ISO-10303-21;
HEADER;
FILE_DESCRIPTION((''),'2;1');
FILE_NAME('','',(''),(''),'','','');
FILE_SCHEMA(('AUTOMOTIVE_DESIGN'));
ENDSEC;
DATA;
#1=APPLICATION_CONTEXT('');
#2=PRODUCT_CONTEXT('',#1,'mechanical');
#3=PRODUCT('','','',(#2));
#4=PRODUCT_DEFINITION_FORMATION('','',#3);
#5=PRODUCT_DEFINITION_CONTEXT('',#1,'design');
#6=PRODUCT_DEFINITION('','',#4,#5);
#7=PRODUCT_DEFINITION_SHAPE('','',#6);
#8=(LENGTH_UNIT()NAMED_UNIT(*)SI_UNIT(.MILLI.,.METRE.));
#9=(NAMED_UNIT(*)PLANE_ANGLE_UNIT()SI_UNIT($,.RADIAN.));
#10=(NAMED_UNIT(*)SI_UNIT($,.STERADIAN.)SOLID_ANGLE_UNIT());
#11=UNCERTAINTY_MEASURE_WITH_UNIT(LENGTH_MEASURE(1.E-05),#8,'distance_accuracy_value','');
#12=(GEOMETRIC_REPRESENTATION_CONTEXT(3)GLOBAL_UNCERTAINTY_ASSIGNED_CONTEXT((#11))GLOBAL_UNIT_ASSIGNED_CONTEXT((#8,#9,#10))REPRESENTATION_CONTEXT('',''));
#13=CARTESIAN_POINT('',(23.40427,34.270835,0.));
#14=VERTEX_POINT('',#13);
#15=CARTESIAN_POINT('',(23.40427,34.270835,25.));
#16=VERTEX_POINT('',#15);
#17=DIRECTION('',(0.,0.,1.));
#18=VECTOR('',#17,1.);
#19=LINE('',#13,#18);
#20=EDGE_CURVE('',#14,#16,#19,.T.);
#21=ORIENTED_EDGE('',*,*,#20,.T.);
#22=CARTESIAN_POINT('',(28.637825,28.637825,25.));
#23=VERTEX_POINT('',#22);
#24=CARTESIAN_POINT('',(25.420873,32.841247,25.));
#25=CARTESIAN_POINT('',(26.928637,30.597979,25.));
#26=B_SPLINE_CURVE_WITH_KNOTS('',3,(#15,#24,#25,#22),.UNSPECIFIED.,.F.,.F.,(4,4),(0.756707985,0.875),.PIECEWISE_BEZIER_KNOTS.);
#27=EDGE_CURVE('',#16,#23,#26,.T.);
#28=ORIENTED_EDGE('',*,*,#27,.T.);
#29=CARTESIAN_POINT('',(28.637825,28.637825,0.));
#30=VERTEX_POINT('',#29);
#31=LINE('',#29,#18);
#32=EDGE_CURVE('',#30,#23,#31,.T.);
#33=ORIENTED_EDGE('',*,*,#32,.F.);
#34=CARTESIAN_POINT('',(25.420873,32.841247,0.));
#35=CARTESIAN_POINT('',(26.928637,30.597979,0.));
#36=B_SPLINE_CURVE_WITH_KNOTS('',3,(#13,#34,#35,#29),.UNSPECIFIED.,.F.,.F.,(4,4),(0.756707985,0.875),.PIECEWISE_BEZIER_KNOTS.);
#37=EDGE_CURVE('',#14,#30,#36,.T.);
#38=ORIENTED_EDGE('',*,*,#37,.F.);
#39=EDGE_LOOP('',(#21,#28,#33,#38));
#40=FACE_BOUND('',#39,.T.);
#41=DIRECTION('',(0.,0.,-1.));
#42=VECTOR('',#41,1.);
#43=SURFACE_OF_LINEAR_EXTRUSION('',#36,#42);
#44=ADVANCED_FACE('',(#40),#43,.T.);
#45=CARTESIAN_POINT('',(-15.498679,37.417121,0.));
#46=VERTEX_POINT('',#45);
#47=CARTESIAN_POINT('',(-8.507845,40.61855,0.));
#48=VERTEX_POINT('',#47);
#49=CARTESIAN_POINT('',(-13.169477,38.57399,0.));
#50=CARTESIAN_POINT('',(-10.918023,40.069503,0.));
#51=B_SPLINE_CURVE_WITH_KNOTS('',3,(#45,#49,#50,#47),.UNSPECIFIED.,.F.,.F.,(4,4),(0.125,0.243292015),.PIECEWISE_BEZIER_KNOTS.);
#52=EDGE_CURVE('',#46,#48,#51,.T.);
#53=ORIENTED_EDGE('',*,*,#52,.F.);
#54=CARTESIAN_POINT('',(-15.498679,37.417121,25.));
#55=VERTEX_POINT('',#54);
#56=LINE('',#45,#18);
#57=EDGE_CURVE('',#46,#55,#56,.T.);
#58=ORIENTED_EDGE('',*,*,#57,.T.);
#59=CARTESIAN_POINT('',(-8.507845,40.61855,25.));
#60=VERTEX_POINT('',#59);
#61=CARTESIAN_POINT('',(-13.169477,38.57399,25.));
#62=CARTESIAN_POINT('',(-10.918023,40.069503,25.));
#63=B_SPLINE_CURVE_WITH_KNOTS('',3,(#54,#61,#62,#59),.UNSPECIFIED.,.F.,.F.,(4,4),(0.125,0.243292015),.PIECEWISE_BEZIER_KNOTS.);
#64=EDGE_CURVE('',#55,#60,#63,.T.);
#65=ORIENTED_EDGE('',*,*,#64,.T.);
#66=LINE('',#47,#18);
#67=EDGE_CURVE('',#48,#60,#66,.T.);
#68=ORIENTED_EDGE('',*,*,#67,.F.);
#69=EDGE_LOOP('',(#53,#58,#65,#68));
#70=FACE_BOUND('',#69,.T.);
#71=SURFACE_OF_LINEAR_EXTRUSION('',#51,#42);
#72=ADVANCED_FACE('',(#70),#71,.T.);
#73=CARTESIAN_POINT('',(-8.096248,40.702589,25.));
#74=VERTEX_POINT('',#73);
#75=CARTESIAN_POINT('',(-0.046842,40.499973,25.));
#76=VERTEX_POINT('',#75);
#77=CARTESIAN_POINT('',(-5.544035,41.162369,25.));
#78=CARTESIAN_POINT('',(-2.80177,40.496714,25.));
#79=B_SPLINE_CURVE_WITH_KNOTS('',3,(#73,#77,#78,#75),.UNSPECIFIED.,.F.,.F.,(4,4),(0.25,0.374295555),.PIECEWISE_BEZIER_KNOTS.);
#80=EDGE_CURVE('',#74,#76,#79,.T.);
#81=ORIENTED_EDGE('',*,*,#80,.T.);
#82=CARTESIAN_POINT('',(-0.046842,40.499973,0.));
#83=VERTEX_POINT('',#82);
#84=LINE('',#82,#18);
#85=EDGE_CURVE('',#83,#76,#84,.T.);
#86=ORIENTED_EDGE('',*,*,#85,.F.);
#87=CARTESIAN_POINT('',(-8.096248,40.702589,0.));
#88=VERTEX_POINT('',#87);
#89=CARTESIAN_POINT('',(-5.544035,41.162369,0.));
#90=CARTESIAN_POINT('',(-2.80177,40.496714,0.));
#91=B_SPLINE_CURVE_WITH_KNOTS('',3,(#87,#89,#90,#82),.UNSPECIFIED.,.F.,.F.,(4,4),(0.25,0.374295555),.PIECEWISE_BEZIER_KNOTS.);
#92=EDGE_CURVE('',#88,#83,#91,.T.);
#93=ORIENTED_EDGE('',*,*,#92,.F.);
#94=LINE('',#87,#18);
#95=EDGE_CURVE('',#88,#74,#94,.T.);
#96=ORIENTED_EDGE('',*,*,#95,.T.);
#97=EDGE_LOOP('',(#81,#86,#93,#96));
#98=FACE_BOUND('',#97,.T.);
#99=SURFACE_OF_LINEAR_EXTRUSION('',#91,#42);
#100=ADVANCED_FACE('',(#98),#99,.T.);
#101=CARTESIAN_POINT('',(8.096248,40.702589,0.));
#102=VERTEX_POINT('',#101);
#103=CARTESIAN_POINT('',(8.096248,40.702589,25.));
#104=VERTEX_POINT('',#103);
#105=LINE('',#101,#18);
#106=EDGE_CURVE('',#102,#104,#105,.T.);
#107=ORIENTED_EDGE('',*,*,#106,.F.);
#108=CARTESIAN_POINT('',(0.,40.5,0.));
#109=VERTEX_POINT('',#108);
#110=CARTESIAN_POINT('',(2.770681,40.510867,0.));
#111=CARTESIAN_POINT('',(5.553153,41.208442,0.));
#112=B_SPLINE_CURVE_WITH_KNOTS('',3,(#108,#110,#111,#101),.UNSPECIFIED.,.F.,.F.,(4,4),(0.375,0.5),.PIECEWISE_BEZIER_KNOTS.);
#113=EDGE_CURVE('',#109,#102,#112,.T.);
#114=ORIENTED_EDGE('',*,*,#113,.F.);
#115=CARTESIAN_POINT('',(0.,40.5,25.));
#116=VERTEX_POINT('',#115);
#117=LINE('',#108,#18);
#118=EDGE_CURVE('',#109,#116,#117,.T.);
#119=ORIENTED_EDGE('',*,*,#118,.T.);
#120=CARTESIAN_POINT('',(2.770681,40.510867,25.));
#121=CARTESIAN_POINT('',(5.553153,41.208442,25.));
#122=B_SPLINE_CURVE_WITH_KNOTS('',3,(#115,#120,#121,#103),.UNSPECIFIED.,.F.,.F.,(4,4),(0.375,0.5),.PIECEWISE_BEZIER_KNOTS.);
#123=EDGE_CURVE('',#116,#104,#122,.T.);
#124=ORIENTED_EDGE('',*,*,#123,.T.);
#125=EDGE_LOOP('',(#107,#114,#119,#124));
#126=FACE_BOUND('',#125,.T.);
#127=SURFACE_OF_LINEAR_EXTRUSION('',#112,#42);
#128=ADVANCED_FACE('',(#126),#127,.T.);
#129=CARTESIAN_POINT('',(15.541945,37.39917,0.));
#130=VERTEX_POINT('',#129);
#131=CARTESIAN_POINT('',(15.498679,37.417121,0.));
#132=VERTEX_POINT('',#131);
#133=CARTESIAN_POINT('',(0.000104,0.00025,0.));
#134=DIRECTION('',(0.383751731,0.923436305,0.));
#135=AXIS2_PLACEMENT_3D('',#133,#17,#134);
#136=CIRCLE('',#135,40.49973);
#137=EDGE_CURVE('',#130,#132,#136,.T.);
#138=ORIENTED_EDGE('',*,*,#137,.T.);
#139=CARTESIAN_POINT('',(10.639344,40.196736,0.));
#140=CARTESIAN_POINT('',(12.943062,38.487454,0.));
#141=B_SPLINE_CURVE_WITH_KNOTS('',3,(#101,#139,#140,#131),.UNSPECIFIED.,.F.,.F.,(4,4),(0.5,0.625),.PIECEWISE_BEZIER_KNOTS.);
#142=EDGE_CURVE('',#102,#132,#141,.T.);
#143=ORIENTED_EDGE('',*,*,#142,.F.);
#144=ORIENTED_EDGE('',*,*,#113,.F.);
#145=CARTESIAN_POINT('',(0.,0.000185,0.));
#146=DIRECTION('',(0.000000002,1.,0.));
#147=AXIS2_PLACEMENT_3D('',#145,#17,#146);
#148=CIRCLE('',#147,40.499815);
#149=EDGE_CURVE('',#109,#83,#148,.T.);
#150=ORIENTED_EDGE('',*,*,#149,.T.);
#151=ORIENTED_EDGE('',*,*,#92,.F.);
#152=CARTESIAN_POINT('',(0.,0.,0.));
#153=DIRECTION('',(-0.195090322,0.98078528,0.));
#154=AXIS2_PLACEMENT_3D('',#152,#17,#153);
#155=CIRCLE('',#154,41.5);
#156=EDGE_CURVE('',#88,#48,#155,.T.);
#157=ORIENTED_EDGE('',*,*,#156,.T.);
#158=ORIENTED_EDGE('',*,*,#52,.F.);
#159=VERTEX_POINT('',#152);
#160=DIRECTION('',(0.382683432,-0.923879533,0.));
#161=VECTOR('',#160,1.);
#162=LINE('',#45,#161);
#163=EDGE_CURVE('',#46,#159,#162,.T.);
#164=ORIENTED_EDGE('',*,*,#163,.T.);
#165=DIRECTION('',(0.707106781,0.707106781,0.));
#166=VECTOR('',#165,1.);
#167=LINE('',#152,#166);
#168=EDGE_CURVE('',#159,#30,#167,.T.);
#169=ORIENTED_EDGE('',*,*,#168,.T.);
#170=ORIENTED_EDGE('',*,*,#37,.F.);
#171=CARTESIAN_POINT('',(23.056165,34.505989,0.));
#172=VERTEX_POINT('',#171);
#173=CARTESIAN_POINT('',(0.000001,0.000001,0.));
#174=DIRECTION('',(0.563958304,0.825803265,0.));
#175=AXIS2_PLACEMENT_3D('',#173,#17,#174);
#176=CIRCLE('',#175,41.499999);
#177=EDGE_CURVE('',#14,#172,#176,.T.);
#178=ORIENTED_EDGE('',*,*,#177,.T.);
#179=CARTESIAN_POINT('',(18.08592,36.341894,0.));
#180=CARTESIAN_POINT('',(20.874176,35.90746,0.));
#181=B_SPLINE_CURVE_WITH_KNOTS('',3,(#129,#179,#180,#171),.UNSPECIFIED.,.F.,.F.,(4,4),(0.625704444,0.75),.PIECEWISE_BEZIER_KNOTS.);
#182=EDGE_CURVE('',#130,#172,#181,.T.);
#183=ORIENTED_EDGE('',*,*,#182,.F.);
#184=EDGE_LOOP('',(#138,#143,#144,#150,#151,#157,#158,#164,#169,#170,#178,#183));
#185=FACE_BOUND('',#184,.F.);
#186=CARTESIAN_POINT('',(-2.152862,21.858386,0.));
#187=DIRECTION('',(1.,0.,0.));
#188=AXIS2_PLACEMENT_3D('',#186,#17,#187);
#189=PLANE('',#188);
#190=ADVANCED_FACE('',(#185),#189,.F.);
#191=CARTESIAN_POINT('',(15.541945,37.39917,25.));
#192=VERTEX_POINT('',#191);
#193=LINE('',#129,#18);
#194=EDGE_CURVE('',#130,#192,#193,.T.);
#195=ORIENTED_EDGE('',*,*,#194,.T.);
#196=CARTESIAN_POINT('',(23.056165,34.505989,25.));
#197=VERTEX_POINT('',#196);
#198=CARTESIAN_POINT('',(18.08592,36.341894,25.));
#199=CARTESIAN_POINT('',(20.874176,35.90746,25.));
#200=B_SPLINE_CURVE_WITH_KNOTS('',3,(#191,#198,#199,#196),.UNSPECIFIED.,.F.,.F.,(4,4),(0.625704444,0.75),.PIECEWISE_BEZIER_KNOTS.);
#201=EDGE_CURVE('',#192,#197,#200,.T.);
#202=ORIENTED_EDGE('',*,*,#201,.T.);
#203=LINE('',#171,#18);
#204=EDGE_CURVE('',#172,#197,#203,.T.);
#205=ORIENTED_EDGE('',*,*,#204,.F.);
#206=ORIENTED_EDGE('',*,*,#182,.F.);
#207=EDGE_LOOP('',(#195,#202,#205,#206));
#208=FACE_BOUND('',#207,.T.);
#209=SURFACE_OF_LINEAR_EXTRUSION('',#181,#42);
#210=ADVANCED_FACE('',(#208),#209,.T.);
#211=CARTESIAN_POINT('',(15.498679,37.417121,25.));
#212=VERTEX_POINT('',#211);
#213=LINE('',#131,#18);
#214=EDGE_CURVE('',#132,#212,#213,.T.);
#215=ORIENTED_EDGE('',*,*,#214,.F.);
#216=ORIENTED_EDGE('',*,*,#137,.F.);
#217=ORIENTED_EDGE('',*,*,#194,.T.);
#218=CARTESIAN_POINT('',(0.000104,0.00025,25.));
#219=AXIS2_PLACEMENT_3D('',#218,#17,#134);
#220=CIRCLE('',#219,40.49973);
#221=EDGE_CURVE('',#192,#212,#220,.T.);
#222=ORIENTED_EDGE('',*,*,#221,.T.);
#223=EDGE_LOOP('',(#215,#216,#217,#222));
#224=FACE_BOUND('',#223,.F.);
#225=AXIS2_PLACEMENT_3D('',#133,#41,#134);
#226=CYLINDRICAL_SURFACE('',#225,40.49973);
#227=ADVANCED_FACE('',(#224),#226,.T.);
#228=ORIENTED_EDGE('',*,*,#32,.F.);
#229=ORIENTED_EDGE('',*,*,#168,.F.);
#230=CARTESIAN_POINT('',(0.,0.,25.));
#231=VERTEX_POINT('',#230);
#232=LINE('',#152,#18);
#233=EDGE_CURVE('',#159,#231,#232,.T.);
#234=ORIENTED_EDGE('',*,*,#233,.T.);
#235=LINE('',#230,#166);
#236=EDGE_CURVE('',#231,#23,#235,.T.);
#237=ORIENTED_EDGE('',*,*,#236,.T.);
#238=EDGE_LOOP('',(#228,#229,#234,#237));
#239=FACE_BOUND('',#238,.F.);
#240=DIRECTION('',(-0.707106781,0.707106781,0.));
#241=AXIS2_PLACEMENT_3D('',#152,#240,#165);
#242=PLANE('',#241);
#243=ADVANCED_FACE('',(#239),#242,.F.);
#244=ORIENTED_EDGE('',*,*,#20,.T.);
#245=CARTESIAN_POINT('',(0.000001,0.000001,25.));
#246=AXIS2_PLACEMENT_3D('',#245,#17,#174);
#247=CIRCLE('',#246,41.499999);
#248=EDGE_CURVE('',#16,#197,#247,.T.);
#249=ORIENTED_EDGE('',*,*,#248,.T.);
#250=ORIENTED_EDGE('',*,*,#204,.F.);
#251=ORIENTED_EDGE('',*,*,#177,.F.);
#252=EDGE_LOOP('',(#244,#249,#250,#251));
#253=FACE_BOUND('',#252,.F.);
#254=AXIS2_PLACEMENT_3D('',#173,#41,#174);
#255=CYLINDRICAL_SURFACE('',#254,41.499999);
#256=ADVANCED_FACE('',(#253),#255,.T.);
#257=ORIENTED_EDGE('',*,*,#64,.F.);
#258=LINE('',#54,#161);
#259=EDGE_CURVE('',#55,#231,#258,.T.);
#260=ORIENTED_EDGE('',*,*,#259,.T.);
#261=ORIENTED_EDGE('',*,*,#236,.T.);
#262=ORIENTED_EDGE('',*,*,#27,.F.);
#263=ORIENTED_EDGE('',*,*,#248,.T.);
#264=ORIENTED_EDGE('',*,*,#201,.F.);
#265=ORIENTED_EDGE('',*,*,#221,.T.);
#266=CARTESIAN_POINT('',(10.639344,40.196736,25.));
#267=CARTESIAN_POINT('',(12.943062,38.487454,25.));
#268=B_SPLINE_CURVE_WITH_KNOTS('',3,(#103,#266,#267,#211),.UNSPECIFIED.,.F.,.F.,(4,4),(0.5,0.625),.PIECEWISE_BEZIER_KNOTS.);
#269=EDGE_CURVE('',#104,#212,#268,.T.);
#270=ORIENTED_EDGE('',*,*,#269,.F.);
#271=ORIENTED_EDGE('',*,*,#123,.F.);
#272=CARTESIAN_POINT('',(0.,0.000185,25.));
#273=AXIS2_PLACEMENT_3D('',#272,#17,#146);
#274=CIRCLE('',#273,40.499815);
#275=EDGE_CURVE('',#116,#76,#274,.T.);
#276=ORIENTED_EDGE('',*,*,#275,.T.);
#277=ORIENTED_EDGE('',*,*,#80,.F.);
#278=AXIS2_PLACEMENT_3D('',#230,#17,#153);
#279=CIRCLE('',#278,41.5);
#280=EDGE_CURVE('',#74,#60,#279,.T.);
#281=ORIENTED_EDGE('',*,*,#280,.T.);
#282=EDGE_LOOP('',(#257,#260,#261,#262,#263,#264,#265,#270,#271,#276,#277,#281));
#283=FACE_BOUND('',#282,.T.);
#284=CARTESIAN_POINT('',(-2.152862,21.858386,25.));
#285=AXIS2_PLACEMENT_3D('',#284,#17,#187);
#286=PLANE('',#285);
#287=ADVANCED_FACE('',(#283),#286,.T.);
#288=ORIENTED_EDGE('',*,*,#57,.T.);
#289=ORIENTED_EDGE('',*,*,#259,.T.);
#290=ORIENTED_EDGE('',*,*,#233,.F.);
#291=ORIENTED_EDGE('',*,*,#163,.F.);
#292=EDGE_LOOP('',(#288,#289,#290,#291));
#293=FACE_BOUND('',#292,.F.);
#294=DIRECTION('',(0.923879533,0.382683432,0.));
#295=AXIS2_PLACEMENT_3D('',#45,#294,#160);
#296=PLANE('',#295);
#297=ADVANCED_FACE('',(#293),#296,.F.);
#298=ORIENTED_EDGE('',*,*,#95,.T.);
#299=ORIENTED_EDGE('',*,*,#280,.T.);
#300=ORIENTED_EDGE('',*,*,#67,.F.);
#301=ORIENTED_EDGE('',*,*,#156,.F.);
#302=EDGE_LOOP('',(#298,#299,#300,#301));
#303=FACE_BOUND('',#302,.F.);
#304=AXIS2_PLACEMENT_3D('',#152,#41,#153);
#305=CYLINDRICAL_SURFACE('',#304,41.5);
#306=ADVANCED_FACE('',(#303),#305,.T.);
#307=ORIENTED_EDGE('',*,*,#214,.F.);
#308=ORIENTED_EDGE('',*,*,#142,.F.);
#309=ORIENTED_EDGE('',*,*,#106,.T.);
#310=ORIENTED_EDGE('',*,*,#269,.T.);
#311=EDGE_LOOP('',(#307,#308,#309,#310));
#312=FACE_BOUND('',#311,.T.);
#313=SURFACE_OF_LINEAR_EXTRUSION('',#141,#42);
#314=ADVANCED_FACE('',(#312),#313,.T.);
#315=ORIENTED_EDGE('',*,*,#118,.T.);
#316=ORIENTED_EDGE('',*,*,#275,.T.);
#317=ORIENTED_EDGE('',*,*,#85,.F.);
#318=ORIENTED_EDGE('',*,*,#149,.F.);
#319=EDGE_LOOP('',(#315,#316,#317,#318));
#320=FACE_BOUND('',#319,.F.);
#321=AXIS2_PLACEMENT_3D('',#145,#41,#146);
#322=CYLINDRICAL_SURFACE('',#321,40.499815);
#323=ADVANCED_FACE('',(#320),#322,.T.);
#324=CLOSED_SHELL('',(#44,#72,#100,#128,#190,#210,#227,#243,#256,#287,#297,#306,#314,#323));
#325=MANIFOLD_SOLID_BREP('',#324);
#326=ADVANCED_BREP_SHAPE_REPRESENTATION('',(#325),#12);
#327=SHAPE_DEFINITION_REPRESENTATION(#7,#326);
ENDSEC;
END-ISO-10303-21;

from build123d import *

# Parameters (mm, degrees)
F1_DEPTH = 25


# Not quite as in the source:
# - ends of sketch curves that miss each other by under 0.0002 mm in the source are joined


with BuildPart() as f1:
    # F0 (on Top) → F1 (new body)
    with BuildSketch(Plane.XY):
        with BuildLine():
            Line((-7.9011580417, 39.7218038563), (0, 0))
            Line((0, 0), (0, 40.5))
            ThreePointArc((0, 40.5), (-0.0234209669, 40.4999932279), (-0.046841926, 40.4999729115))
            ThreePointArc((-0.046841926, 40.4999729115), (-3.9930017081, 40.3026790345), (-7.9011580417, 39.7218038563))
        make_face()
        with BuildLine():
            Line((-15.4986790108, 37.4171210667), (0, 0))
            Line((0, 0), (-7.9011580417, 39.7218038563))
            ThreePointArc((-7.9011580417, 39.7218038563), (-11.7565294288, 38.7560835972), (-15.4986790108, 37.4171210667))
        make_face()
        with BuildLine():
            Line((22.5005944373, 33.6745192983), (0, 0))
            Line((0, 0), (28.6378246381, 28.6378246381))
            ThreePointArc((28.6378246381, 28.6378246381), (25.6929280086, 31.3069233612), (22.5005944373, 33.6745192983))
        make_face()
        with BuildLine():
            Line((15.4986790108, 37.4171210667), (0, 0))
            Line((0, 0), (22.5005944373, 33.6745192983))
            ThreePointArc((22.5005944373, 33.6745192983), (19.1122200978, 35.7067646663), (15.5419449411, 37.3991704112))
            ThreePointArc((15.5419449411, 37.3991704112), (15.5203145712, 37.4081519941), (15.4986790108, 37.4171210667))
        make_face()
        with BuildLine():
            Line((7.9011580417, 39.7218038563), (0, 0))
            Line((0, 0), (15.4986790108, 37.4171210667))
            ThreePointArc((15.4986790108, 37.4171210667), (11.7565294288, 38.7560835972), (7.9011580417, 39.7218038563))
        make_face()
        with BuildLine():
            Line((0, 40.5), (0, 0))
            Line((0, 0), (7.9011580417, 39.7218038563))
            ThreePointArc((7.9011580417, 39.7218038563), (3.9696941833, 40.3049814302), (0, 40.5))
        make_face()
        with BuildLine():
            add(Edge.make_bspline(
                [(0, 40.5), (2.7706806954, 40.5108669818), (5.5531529278, 41.2084422704), (8.0962483637, 40.7025891367)],
                knots=[0.375, 0.375, 0.375, 0.375, 0.5, 0.5, 0.5, 0.5], degree=3))
            ThreePointArc((0, 40.5), (3.9696941833, 40.3049814302), (7.9011580417, 39.7218038563))
            Line((7.9011580417, 39.7218038563), (8.0962483637, 40.7025891367))
        make_face()
        with BuildLine():
            ThreePointArc((-15.4986790108, 37.4171210667), (-11.7565294288, 38.7560835972), (-7.9011580417, 39.7218038563))
            Line((-7.9011580417, 39.7218038563), (-8.0962483637, 40.7025891367))
            ThreePointArc((-8.0962483637, 40.7025891367), (-8.3021528679, 40.6610902185), (-8.5078446962, 40.6185496864))
            add(Edge.make_bspline(
                [(-15.4986790108, 37.4171210667), (-13.169476805, 38.5739896459), (-10.9180232176, 40.0695028236), (-8.5078446962, 40.6185496864)],
                knots=[0.125, 0.125, 0.125, 0.125, 0.2432920147, 0.2432920147, 0.2432920147, 0.2432920147], degree=3))
        make_face()
        with BuildLine():
            Line((-8.0962483637, 40.7025891367), (-7.9011580417, 39.7218038563))
            ThreePointArc((-7.9011580417, 39.7218038563), (-3.9930017081, 40.3026790345), (-0.046841926, 40.4999729115))
            add(Edge.make_bspline(
                [(-8.0962483637, 40.7025891367), (-5.5440345136, 41.1623685455), (-2.801770338, 40.4967143515), (-0.046841926, 40.4999729115)],
                knots=[0.25, 0.25, 0.25, 0.25, 0.3742955555, 0.3742955555, 0.3742955555, 0.3742955555], degree=3))
        make_face()
        with BuildLine():
            ThreePointArc((22.5005944373, 33.6745192983), (25.6929280086, 31.3069233612), (28.6378246381, 28.6378246381))
            add(Edge.make_bspline(
                [(23.4042695923, 34.2708354852), (25.4208730599, 32.841246937), (26.9286368317, 30.597978935), (28.6378246381, 28.6378246381)],
                knots=[0.7567079853, 0.7567079853, 0.7567079853, 0.7567079853, 0.875, 0.875, 0.875, 0.875], degree=3))
            ThreePointArc((23.4042695923, 34.2708354852), (23.230514679, 34.388852667), (23.0561646703, 34.5059889106))
            Line((23.0561646703, 34.5059889106), (22.5005944373, 33.6745192983))
        make_face()
        with BuildLine():
            ThreePointArc((15.5419449411, 37.3991704112), (19.1122200978, 35.7067646663), (22.5005944373, 33.6745192983))
            Line((22.5005944373, 33.6745192983), (23.0561646703, 34.5059889106))
            add(Edge.make_bspline(
                [(15.5419449411, 37.3991704112), (18.0859199176, 36.3418944337), (20.8741764939, 35.907459652), (23.0561646703, 34.5059889106)],
                knots=[0.6257044445, 0.6257044445, 0.6257044445, 0.6257044445, 0.75, 0.75, 0.75, 0.75], degree=3))
        make_face()
        with BuildLine():
            ThreePointArc((7.9011580417, 39.7218038563), (11.7565294288, 38.7560835972), (15.4986790108, 37.4171210667))
            add(Edge.make_bspline(
                [(8.0962483637, 40.7025891367), (10.6393437996, 40.1967360031), (12.9430624391, 38.4874544473), (15.4986790108, 37.4171210667)],
                knots=[0.5, 0.5, 0.5, 0.5, 0.625, 0.625, 0.625, 0.625], degree=3))
            Line((8.0962483637, 40.7025891367), (7.9011580417, 39.7218038563))
        make_face()
    extrude(amount=F1_DEPTH)


solid = f1.part
